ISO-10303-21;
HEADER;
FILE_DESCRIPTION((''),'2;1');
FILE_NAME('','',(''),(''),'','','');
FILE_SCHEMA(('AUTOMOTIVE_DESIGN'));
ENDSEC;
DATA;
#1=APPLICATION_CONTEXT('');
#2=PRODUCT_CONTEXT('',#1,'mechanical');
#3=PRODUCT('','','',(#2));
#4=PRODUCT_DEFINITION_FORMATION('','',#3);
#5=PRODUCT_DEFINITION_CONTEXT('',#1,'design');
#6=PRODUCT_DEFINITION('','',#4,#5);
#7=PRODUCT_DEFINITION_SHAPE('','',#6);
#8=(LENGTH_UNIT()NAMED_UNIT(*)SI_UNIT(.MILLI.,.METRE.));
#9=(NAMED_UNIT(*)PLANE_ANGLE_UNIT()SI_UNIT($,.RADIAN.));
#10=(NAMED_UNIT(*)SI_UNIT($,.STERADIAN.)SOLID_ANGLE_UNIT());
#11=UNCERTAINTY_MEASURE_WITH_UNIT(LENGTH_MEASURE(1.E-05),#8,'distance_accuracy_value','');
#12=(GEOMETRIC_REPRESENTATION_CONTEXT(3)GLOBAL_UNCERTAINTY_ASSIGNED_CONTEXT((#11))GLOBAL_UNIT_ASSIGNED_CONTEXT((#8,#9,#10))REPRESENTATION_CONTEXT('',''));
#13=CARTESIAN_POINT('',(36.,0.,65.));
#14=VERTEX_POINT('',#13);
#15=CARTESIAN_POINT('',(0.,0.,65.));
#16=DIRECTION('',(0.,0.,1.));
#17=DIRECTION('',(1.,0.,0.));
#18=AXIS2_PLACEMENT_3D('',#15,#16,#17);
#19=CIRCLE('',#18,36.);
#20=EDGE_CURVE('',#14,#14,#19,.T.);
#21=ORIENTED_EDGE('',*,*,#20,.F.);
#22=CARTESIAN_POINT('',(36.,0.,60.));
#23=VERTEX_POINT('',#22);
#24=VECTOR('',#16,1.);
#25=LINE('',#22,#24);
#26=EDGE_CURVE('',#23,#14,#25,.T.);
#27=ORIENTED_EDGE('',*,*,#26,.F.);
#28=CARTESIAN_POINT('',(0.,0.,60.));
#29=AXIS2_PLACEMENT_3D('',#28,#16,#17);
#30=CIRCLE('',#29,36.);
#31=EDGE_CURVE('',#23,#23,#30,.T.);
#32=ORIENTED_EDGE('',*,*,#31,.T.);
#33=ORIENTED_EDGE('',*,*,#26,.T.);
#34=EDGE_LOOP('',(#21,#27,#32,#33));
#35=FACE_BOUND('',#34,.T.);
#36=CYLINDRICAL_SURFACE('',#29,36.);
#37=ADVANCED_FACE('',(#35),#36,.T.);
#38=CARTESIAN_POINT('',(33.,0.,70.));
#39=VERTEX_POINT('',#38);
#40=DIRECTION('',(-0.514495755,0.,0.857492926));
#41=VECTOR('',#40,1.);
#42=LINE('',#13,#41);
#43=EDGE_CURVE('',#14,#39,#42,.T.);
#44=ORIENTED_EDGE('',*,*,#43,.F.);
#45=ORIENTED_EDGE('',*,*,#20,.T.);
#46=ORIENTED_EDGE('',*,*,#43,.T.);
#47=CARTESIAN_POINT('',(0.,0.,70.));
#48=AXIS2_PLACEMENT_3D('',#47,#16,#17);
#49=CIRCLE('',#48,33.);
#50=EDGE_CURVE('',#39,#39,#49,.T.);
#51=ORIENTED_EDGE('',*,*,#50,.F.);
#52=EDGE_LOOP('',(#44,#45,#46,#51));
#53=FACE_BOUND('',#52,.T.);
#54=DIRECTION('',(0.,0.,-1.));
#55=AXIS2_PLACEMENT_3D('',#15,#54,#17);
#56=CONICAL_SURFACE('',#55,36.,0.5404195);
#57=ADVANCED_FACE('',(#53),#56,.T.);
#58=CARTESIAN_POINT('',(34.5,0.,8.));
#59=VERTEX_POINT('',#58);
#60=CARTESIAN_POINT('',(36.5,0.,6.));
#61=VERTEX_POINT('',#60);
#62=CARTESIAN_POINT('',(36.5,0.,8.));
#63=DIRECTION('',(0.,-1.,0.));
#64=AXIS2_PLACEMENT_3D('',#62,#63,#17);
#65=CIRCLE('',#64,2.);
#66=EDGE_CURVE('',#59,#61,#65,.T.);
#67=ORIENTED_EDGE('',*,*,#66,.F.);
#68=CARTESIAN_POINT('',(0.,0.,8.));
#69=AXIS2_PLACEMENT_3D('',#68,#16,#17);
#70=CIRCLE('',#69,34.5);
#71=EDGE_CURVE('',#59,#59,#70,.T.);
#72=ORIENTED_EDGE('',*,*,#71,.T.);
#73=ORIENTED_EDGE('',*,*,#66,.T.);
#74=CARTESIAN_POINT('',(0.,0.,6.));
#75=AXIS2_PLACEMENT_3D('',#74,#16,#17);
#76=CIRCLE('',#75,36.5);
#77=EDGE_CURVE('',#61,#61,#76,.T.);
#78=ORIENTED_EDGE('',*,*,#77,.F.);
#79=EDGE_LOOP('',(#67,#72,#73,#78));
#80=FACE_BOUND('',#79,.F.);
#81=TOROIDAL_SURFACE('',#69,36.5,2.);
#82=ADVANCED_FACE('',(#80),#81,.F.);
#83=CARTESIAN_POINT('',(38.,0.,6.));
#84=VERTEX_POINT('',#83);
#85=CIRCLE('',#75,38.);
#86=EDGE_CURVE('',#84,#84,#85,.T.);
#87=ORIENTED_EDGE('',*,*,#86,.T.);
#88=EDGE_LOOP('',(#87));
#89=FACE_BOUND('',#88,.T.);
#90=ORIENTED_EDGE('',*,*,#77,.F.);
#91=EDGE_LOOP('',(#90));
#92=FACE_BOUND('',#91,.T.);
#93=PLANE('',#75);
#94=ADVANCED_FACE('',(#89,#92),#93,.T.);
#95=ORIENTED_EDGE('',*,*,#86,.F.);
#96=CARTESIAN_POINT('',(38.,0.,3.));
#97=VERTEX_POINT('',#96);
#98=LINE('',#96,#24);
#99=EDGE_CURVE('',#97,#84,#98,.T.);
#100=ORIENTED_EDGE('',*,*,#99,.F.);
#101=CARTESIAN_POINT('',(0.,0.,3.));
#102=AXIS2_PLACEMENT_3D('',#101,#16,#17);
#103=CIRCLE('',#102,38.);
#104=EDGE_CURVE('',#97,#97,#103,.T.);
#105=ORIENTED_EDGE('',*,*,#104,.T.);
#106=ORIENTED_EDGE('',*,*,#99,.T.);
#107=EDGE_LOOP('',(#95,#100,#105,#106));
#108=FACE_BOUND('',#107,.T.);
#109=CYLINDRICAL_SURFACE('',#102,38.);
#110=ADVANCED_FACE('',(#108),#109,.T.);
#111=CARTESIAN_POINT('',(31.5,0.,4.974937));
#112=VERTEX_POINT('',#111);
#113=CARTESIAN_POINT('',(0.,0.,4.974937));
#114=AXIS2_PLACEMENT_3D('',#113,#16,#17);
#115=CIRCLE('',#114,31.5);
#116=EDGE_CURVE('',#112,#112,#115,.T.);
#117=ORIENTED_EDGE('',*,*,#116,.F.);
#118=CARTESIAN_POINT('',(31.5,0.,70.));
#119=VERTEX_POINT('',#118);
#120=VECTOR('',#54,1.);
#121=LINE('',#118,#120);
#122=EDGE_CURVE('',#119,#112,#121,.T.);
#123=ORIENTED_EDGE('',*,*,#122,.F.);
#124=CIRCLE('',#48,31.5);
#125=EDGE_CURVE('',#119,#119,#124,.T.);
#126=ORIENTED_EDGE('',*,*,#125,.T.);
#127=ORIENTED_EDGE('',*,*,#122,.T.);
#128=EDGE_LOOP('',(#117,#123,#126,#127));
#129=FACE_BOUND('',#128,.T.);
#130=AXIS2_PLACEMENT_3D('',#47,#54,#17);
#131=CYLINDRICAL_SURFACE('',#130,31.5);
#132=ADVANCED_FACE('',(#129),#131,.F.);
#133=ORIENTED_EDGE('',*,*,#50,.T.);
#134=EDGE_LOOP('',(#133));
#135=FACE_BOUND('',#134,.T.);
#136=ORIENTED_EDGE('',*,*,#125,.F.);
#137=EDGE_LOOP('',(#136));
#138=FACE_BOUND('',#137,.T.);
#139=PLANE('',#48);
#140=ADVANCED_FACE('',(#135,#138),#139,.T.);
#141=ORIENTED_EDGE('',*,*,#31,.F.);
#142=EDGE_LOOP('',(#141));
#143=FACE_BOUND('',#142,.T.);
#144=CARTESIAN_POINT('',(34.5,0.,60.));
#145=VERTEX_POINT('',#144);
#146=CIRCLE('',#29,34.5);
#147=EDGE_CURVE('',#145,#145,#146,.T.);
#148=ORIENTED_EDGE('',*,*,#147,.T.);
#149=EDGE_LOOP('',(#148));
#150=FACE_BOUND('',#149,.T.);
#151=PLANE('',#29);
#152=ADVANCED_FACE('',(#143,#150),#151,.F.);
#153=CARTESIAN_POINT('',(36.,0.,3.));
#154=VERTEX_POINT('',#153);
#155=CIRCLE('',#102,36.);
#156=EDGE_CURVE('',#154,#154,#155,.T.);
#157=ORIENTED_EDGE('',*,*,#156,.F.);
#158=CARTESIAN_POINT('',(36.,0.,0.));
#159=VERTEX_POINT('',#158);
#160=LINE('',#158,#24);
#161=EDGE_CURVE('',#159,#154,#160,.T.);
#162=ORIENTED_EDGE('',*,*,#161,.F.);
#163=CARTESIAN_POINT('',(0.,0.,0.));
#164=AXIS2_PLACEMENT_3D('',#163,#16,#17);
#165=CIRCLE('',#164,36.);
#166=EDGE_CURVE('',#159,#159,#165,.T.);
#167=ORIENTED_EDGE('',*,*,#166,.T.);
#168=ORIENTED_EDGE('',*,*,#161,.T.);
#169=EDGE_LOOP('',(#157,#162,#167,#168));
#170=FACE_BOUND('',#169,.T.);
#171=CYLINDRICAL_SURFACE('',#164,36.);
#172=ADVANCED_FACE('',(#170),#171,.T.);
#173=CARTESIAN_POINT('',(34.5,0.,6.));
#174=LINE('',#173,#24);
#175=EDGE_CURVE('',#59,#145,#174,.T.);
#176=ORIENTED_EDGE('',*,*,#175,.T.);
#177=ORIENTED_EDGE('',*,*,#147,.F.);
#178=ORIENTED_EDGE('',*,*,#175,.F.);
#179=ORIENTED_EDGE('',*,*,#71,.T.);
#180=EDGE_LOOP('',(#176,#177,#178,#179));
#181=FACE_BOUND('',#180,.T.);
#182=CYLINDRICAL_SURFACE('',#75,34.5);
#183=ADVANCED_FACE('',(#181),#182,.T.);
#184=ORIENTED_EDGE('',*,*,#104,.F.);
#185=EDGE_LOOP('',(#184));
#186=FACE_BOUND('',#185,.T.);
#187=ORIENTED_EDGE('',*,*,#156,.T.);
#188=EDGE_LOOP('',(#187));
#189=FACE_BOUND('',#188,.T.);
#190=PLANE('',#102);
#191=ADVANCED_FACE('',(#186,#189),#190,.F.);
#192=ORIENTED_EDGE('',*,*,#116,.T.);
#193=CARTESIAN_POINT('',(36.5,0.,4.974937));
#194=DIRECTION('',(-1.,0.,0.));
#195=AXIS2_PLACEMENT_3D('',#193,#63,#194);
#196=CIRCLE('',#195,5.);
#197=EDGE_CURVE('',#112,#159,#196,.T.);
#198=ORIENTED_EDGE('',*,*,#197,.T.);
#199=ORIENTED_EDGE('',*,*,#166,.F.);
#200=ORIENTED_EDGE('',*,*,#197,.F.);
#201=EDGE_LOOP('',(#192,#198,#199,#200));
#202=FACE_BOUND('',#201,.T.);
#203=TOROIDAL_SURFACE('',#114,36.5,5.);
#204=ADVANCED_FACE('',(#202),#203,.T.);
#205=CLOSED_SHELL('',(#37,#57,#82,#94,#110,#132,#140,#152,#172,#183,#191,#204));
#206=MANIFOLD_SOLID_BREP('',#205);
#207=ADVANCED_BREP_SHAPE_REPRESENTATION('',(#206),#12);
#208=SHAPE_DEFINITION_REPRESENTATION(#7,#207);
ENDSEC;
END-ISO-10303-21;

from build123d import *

# Parameters (mm, degrees)
F2_SIZE2 = 3
F2_SIZE  = 5
F3_R     = 2


# Not quite as in the source:
# - a fillet or chamfer that OpenCascade refuses, or shapes differently, is made with other operations: its cross-section is extruded or revolved along the edge and cut away or added


with BuildPart() as f1:
    # F0 (on Front) → F1 (revolve)
    with BuildSketch(Plane.XZ):
        Polygon((34.5, 70), (31.5, 70), (31.5, 0), (36, 0), (36, 3), (38, 3), (38, 6), (34.5, 6), (34.5, 60), (36, 60), (36, 70), align=None)
    revolve(axis=Axis((0, 0, 35), (0, 0, 1)))

    # F2
    f2_edges = [f1.edges().sort_by_distance(p)[0] for p in [
        (-36, 0, 70),
    ]]
    f2_side = f1.faces().sort_by_distance((-36, 0, 65))[0]
    chamfer(f2_edges, length=F2_SIZE, length2=F2_SIZE2, reference=f2_side)

    # F3
    f3_edges = [f1.edges().sort_by_distance(p)[0] for p in [
        (-34.5, 0, 6),
    ]]
    fillet(f3_edges, radius=F3_R)

    # F4: fillet of radius 5 on 1 edges, made by hand

    # F4_s1 → F4_t2 (revolve, cut)
    with BuildSketch(Plane.XZ):
        with BuildLine():
            ThreePointArc((31.5, 4.9749371855), (32.7919007565, 1.6208352193), (36, 0))
            Line((36, 0), (31.5, 0))
            Line((31.5, 0), (31.5, 4.9749371855))
        make_face()
    revolve(axis=Axis((0, 0, 0), (0, 0, 1)), mode=Mode.SUBTRACT)


solid = f1.part
